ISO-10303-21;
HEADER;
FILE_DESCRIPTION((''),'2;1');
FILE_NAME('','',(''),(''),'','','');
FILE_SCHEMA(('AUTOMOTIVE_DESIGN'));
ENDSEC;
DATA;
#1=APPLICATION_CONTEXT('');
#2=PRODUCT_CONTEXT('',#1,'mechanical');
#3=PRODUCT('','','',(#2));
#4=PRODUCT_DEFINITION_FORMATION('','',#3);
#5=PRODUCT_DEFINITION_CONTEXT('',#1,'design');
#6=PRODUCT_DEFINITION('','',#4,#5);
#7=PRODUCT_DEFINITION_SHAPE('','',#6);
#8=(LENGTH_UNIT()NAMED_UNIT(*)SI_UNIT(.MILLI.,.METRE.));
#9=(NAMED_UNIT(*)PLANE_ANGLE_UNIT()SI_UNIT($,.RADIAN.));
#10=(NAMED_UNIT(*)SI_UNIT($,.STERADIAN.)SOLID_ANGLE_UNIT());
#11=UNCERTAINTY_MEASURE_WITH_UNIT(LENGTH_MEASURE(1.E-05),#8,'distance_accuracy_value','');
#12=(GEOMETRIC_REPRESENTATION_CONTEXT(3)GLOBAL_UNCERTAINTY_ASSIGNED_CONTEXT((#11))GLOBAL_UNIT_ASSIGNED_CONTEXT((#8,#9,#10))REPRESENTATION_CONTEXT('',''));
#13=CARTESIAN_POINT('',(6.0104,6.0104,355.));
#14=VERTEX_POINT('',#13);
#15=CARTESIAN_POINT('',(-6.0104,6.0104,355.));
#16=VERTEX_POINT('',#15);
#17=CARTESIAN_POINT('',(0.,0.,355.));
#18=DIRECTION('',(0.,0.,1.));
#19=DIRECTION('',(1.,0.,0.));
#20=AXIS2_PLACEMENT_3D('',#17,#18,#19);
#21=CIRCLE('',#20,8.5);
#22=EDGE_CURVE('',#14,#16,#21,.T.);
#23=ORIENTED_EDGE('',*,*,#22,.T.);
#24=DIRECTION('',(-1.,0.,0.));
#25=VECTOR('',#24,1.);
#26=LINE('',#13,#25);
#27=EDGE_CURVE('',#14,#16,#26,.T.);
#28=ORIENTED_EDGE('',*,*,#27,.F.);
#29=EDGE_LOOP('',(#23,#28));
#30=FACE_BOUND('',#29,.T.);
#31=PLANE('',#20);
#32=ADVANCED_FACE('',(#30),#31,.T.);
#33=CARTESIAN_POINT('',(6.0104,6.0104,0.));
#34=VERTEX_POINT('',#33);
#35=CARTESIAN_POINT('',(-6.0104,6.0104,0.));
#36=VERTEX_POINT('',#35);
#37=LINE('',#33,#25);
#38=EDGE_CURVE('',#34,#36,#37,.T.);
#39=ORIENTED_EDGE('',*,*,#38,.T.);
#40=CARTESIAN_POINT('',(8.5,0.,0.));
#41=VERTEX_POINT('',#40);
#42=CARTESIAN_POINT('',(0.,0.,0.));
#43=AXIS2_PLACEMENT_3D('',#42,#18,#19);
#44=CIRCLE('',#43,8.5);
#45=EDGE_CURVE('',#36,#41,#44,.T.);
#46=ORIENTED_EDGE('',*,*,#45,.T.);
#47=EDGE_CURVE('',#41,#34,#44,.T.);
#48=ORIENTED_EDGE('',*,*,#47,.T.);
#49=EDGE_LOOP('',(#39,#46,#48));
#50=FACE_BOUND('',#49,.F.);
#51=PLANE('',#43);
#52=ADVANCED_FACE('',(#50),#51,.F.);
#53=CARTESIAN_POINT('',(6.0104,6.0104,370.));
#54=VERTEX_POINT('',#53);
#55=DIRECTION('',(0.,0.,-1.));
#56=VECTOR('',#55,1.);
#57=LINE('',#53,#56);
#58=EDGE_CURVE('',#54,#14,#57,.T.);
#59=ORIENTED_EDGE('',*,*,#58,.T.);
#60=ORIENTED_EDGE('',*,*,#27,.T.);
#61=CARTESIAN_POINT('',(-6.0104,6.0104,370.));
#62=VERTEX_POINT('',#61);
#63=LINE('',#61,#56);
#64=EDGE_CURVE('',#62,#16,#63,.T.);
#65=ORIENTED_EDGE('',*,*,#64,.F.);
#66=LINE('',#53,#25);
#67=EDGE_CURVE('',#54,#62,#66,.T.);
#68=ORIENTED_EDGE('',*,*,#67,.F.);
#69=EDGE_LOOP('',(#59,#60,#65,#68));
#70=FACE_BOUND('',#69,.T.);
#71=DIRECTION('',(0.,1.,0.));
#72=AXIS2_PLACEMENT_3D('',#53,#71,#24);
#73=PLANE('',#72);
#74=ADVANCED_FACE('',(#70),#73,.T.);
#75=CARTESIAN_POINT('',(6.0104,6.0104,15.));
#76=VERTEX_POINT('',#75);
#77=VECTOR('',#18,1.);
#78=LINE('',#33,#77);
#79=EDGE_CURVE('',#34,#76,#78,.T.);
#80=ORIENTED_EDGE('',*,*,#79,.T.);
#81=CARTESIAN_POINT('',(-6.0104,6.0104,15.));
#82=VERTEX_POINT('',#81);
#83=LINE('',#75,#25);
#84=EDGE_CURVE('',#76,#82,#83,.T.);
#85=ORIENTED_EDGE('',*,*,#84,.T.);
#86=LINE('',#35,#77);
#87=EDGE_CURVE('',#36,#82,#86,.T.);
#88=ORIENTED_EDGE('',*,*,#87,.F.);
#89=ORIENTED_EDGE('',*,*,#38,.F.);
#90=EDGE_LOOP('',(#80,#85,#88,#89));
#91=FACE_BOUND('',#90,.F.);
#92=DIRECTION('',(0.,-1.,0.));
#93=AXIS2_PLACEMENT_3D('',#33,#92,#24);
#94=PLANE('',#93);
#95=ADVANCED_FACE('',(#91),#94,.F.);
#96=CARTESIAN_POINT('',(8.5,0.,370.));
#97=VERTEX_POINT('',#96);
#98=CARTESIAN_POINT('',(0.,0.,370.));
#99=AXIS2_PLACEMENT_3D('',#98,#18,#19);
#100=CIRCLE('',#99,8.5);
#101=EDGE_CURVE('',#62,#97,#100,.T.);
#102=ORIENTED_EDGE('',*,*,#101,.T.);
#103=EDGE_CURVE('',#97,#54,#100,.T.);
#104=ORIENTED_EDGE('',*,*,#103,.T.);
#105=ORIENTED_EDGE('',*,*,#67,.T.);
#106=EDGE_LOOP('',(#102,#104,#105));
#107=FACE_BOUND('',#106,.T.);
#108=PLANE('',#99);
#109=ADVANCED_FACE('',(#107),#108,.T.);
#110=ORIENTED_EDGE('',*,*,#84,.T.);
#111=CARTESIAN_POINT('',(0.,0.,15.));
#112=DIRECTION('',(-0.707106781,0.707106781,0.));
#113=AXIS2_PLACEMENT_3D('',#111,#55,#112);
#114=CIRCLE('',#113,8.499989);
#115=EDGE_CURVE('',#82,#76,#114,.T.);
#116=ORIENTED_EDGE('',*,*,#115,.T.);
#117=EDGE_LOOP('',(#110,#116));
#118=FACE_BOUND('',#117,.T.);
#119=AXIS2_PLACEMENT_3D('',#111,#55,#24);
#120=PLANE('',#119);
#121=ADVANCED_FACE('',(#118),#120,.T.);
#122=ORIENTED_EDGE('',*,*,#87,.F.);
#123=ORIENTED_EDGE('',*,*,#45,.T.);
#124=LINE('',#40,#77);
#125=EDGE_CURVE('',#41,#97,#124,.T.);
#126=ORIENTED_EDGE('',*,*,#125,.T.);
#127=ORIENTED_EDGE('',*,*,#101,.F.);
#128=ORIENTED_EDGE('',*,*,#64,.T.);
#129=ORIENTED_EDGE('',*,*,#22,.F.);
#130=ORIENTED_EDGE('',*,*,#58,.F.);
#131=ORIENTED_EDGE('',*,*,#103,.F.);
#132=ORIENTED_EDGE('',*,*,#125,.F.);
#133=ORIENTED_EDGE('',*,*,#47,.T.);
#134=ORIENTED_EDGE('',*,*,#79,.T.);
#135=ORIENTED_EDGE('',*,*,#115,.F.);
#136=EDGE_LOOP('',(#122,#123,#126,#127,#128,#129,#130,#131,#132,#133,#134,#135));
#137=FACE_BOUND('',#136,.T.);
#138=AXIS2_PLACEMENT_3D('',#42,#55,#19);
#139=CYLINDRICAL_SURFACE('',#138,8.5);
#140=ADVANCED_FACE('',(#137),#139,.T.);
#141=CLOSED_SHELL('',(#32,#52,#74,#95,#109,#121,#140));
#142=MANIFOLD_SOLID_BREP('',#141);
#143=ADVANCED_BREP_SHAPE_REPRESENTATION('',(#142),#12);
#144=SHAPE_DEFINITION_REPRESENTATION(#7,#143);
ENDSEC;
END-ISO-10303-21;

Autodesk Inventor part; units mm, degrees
ref_plane "YZ Plane" through (0, 0, 0) normal (1, 0, 0) x (0, 1, 0)
ref_plane "XZ Plane" through (0, 0, 0) normal (0, 1, 0) x (-1, 0, 0)
ref_plane "XY Plane" through (0, 0, 0) normal (0, 0, 1) x (1, 0, 0)
sketch "Sketch2" plane through (0, 0, 0) normal (0, 0, 1) x (1, 0, 0)
  circle A0 centre (0, 0) radius 8.5
  dimension "d4" = 17
extrude "Extrusion2" add sketch "Sketch2" along normal blind 370
sketch "Sketch3" plane through (0, 0, 370) normal (0, 0, 1) x (1, 0, 0)
  circle A0 centre (0, 0) radius 8.5 projected
  arc A1 (6.0104, 6.0104) -> (-6.0104, 6.0104) centre (0, 0) ccw
  line L0 (0, 0) -> (6.0104, 6.0104) construction
  line L1 (0, 0) -> (8.5, 0) construction
  line L2 (0, 0) -> (-6.0104, 6.0104) construction
  arc A2 (6.0104, 6.0104) -> (-6.0104, 6.0104) centre (0, 0) ccw
  line L3 (6.0104, 6.0104) -> (-6.0104, 6.0104)
  point P0 (-6.0104, 6.0104)
  dimension "d7" = 45
extrude "Extrusion3" cut sketch "Sketch3" against normal blind 15 contours L3 A0 picked at (-0.3172, 6.8225)
sketch "Sketch4" plane through (0, 0, 0) normal (0, 0, -1) x (-1, 0, 0)
  arc A0 (-6.0104, 6.0104) -> (6.0104, 6.0104) centre (0, 0) ccw projected
  arc A1 (6.0104, 6.0104) -> (-6.0104, 6.0104) centre (0, 0) ccw
  line L0 (0, 0) -> (-6.0104, 6.0104) construction
  line L1 (0, 0) -> (6.0104, 6.0104) construction
  arc A2 (-6.0104, 6.0104) -> (6.0104, 6.0104) centre (0, 12.0208) ccw
  line L2 (-6.0104, 6.0104) -> (6.0104, 6.0104) projected
  line L3 (-6.0104, 6.0104) -> (6.0104, 6.0104)
  dimension "d11" = 90
extrude "Extrusion4" cut sketch "Sketch4" against normal blind 15 contours A1 L2
properties part number "Project_stationary_rod"
